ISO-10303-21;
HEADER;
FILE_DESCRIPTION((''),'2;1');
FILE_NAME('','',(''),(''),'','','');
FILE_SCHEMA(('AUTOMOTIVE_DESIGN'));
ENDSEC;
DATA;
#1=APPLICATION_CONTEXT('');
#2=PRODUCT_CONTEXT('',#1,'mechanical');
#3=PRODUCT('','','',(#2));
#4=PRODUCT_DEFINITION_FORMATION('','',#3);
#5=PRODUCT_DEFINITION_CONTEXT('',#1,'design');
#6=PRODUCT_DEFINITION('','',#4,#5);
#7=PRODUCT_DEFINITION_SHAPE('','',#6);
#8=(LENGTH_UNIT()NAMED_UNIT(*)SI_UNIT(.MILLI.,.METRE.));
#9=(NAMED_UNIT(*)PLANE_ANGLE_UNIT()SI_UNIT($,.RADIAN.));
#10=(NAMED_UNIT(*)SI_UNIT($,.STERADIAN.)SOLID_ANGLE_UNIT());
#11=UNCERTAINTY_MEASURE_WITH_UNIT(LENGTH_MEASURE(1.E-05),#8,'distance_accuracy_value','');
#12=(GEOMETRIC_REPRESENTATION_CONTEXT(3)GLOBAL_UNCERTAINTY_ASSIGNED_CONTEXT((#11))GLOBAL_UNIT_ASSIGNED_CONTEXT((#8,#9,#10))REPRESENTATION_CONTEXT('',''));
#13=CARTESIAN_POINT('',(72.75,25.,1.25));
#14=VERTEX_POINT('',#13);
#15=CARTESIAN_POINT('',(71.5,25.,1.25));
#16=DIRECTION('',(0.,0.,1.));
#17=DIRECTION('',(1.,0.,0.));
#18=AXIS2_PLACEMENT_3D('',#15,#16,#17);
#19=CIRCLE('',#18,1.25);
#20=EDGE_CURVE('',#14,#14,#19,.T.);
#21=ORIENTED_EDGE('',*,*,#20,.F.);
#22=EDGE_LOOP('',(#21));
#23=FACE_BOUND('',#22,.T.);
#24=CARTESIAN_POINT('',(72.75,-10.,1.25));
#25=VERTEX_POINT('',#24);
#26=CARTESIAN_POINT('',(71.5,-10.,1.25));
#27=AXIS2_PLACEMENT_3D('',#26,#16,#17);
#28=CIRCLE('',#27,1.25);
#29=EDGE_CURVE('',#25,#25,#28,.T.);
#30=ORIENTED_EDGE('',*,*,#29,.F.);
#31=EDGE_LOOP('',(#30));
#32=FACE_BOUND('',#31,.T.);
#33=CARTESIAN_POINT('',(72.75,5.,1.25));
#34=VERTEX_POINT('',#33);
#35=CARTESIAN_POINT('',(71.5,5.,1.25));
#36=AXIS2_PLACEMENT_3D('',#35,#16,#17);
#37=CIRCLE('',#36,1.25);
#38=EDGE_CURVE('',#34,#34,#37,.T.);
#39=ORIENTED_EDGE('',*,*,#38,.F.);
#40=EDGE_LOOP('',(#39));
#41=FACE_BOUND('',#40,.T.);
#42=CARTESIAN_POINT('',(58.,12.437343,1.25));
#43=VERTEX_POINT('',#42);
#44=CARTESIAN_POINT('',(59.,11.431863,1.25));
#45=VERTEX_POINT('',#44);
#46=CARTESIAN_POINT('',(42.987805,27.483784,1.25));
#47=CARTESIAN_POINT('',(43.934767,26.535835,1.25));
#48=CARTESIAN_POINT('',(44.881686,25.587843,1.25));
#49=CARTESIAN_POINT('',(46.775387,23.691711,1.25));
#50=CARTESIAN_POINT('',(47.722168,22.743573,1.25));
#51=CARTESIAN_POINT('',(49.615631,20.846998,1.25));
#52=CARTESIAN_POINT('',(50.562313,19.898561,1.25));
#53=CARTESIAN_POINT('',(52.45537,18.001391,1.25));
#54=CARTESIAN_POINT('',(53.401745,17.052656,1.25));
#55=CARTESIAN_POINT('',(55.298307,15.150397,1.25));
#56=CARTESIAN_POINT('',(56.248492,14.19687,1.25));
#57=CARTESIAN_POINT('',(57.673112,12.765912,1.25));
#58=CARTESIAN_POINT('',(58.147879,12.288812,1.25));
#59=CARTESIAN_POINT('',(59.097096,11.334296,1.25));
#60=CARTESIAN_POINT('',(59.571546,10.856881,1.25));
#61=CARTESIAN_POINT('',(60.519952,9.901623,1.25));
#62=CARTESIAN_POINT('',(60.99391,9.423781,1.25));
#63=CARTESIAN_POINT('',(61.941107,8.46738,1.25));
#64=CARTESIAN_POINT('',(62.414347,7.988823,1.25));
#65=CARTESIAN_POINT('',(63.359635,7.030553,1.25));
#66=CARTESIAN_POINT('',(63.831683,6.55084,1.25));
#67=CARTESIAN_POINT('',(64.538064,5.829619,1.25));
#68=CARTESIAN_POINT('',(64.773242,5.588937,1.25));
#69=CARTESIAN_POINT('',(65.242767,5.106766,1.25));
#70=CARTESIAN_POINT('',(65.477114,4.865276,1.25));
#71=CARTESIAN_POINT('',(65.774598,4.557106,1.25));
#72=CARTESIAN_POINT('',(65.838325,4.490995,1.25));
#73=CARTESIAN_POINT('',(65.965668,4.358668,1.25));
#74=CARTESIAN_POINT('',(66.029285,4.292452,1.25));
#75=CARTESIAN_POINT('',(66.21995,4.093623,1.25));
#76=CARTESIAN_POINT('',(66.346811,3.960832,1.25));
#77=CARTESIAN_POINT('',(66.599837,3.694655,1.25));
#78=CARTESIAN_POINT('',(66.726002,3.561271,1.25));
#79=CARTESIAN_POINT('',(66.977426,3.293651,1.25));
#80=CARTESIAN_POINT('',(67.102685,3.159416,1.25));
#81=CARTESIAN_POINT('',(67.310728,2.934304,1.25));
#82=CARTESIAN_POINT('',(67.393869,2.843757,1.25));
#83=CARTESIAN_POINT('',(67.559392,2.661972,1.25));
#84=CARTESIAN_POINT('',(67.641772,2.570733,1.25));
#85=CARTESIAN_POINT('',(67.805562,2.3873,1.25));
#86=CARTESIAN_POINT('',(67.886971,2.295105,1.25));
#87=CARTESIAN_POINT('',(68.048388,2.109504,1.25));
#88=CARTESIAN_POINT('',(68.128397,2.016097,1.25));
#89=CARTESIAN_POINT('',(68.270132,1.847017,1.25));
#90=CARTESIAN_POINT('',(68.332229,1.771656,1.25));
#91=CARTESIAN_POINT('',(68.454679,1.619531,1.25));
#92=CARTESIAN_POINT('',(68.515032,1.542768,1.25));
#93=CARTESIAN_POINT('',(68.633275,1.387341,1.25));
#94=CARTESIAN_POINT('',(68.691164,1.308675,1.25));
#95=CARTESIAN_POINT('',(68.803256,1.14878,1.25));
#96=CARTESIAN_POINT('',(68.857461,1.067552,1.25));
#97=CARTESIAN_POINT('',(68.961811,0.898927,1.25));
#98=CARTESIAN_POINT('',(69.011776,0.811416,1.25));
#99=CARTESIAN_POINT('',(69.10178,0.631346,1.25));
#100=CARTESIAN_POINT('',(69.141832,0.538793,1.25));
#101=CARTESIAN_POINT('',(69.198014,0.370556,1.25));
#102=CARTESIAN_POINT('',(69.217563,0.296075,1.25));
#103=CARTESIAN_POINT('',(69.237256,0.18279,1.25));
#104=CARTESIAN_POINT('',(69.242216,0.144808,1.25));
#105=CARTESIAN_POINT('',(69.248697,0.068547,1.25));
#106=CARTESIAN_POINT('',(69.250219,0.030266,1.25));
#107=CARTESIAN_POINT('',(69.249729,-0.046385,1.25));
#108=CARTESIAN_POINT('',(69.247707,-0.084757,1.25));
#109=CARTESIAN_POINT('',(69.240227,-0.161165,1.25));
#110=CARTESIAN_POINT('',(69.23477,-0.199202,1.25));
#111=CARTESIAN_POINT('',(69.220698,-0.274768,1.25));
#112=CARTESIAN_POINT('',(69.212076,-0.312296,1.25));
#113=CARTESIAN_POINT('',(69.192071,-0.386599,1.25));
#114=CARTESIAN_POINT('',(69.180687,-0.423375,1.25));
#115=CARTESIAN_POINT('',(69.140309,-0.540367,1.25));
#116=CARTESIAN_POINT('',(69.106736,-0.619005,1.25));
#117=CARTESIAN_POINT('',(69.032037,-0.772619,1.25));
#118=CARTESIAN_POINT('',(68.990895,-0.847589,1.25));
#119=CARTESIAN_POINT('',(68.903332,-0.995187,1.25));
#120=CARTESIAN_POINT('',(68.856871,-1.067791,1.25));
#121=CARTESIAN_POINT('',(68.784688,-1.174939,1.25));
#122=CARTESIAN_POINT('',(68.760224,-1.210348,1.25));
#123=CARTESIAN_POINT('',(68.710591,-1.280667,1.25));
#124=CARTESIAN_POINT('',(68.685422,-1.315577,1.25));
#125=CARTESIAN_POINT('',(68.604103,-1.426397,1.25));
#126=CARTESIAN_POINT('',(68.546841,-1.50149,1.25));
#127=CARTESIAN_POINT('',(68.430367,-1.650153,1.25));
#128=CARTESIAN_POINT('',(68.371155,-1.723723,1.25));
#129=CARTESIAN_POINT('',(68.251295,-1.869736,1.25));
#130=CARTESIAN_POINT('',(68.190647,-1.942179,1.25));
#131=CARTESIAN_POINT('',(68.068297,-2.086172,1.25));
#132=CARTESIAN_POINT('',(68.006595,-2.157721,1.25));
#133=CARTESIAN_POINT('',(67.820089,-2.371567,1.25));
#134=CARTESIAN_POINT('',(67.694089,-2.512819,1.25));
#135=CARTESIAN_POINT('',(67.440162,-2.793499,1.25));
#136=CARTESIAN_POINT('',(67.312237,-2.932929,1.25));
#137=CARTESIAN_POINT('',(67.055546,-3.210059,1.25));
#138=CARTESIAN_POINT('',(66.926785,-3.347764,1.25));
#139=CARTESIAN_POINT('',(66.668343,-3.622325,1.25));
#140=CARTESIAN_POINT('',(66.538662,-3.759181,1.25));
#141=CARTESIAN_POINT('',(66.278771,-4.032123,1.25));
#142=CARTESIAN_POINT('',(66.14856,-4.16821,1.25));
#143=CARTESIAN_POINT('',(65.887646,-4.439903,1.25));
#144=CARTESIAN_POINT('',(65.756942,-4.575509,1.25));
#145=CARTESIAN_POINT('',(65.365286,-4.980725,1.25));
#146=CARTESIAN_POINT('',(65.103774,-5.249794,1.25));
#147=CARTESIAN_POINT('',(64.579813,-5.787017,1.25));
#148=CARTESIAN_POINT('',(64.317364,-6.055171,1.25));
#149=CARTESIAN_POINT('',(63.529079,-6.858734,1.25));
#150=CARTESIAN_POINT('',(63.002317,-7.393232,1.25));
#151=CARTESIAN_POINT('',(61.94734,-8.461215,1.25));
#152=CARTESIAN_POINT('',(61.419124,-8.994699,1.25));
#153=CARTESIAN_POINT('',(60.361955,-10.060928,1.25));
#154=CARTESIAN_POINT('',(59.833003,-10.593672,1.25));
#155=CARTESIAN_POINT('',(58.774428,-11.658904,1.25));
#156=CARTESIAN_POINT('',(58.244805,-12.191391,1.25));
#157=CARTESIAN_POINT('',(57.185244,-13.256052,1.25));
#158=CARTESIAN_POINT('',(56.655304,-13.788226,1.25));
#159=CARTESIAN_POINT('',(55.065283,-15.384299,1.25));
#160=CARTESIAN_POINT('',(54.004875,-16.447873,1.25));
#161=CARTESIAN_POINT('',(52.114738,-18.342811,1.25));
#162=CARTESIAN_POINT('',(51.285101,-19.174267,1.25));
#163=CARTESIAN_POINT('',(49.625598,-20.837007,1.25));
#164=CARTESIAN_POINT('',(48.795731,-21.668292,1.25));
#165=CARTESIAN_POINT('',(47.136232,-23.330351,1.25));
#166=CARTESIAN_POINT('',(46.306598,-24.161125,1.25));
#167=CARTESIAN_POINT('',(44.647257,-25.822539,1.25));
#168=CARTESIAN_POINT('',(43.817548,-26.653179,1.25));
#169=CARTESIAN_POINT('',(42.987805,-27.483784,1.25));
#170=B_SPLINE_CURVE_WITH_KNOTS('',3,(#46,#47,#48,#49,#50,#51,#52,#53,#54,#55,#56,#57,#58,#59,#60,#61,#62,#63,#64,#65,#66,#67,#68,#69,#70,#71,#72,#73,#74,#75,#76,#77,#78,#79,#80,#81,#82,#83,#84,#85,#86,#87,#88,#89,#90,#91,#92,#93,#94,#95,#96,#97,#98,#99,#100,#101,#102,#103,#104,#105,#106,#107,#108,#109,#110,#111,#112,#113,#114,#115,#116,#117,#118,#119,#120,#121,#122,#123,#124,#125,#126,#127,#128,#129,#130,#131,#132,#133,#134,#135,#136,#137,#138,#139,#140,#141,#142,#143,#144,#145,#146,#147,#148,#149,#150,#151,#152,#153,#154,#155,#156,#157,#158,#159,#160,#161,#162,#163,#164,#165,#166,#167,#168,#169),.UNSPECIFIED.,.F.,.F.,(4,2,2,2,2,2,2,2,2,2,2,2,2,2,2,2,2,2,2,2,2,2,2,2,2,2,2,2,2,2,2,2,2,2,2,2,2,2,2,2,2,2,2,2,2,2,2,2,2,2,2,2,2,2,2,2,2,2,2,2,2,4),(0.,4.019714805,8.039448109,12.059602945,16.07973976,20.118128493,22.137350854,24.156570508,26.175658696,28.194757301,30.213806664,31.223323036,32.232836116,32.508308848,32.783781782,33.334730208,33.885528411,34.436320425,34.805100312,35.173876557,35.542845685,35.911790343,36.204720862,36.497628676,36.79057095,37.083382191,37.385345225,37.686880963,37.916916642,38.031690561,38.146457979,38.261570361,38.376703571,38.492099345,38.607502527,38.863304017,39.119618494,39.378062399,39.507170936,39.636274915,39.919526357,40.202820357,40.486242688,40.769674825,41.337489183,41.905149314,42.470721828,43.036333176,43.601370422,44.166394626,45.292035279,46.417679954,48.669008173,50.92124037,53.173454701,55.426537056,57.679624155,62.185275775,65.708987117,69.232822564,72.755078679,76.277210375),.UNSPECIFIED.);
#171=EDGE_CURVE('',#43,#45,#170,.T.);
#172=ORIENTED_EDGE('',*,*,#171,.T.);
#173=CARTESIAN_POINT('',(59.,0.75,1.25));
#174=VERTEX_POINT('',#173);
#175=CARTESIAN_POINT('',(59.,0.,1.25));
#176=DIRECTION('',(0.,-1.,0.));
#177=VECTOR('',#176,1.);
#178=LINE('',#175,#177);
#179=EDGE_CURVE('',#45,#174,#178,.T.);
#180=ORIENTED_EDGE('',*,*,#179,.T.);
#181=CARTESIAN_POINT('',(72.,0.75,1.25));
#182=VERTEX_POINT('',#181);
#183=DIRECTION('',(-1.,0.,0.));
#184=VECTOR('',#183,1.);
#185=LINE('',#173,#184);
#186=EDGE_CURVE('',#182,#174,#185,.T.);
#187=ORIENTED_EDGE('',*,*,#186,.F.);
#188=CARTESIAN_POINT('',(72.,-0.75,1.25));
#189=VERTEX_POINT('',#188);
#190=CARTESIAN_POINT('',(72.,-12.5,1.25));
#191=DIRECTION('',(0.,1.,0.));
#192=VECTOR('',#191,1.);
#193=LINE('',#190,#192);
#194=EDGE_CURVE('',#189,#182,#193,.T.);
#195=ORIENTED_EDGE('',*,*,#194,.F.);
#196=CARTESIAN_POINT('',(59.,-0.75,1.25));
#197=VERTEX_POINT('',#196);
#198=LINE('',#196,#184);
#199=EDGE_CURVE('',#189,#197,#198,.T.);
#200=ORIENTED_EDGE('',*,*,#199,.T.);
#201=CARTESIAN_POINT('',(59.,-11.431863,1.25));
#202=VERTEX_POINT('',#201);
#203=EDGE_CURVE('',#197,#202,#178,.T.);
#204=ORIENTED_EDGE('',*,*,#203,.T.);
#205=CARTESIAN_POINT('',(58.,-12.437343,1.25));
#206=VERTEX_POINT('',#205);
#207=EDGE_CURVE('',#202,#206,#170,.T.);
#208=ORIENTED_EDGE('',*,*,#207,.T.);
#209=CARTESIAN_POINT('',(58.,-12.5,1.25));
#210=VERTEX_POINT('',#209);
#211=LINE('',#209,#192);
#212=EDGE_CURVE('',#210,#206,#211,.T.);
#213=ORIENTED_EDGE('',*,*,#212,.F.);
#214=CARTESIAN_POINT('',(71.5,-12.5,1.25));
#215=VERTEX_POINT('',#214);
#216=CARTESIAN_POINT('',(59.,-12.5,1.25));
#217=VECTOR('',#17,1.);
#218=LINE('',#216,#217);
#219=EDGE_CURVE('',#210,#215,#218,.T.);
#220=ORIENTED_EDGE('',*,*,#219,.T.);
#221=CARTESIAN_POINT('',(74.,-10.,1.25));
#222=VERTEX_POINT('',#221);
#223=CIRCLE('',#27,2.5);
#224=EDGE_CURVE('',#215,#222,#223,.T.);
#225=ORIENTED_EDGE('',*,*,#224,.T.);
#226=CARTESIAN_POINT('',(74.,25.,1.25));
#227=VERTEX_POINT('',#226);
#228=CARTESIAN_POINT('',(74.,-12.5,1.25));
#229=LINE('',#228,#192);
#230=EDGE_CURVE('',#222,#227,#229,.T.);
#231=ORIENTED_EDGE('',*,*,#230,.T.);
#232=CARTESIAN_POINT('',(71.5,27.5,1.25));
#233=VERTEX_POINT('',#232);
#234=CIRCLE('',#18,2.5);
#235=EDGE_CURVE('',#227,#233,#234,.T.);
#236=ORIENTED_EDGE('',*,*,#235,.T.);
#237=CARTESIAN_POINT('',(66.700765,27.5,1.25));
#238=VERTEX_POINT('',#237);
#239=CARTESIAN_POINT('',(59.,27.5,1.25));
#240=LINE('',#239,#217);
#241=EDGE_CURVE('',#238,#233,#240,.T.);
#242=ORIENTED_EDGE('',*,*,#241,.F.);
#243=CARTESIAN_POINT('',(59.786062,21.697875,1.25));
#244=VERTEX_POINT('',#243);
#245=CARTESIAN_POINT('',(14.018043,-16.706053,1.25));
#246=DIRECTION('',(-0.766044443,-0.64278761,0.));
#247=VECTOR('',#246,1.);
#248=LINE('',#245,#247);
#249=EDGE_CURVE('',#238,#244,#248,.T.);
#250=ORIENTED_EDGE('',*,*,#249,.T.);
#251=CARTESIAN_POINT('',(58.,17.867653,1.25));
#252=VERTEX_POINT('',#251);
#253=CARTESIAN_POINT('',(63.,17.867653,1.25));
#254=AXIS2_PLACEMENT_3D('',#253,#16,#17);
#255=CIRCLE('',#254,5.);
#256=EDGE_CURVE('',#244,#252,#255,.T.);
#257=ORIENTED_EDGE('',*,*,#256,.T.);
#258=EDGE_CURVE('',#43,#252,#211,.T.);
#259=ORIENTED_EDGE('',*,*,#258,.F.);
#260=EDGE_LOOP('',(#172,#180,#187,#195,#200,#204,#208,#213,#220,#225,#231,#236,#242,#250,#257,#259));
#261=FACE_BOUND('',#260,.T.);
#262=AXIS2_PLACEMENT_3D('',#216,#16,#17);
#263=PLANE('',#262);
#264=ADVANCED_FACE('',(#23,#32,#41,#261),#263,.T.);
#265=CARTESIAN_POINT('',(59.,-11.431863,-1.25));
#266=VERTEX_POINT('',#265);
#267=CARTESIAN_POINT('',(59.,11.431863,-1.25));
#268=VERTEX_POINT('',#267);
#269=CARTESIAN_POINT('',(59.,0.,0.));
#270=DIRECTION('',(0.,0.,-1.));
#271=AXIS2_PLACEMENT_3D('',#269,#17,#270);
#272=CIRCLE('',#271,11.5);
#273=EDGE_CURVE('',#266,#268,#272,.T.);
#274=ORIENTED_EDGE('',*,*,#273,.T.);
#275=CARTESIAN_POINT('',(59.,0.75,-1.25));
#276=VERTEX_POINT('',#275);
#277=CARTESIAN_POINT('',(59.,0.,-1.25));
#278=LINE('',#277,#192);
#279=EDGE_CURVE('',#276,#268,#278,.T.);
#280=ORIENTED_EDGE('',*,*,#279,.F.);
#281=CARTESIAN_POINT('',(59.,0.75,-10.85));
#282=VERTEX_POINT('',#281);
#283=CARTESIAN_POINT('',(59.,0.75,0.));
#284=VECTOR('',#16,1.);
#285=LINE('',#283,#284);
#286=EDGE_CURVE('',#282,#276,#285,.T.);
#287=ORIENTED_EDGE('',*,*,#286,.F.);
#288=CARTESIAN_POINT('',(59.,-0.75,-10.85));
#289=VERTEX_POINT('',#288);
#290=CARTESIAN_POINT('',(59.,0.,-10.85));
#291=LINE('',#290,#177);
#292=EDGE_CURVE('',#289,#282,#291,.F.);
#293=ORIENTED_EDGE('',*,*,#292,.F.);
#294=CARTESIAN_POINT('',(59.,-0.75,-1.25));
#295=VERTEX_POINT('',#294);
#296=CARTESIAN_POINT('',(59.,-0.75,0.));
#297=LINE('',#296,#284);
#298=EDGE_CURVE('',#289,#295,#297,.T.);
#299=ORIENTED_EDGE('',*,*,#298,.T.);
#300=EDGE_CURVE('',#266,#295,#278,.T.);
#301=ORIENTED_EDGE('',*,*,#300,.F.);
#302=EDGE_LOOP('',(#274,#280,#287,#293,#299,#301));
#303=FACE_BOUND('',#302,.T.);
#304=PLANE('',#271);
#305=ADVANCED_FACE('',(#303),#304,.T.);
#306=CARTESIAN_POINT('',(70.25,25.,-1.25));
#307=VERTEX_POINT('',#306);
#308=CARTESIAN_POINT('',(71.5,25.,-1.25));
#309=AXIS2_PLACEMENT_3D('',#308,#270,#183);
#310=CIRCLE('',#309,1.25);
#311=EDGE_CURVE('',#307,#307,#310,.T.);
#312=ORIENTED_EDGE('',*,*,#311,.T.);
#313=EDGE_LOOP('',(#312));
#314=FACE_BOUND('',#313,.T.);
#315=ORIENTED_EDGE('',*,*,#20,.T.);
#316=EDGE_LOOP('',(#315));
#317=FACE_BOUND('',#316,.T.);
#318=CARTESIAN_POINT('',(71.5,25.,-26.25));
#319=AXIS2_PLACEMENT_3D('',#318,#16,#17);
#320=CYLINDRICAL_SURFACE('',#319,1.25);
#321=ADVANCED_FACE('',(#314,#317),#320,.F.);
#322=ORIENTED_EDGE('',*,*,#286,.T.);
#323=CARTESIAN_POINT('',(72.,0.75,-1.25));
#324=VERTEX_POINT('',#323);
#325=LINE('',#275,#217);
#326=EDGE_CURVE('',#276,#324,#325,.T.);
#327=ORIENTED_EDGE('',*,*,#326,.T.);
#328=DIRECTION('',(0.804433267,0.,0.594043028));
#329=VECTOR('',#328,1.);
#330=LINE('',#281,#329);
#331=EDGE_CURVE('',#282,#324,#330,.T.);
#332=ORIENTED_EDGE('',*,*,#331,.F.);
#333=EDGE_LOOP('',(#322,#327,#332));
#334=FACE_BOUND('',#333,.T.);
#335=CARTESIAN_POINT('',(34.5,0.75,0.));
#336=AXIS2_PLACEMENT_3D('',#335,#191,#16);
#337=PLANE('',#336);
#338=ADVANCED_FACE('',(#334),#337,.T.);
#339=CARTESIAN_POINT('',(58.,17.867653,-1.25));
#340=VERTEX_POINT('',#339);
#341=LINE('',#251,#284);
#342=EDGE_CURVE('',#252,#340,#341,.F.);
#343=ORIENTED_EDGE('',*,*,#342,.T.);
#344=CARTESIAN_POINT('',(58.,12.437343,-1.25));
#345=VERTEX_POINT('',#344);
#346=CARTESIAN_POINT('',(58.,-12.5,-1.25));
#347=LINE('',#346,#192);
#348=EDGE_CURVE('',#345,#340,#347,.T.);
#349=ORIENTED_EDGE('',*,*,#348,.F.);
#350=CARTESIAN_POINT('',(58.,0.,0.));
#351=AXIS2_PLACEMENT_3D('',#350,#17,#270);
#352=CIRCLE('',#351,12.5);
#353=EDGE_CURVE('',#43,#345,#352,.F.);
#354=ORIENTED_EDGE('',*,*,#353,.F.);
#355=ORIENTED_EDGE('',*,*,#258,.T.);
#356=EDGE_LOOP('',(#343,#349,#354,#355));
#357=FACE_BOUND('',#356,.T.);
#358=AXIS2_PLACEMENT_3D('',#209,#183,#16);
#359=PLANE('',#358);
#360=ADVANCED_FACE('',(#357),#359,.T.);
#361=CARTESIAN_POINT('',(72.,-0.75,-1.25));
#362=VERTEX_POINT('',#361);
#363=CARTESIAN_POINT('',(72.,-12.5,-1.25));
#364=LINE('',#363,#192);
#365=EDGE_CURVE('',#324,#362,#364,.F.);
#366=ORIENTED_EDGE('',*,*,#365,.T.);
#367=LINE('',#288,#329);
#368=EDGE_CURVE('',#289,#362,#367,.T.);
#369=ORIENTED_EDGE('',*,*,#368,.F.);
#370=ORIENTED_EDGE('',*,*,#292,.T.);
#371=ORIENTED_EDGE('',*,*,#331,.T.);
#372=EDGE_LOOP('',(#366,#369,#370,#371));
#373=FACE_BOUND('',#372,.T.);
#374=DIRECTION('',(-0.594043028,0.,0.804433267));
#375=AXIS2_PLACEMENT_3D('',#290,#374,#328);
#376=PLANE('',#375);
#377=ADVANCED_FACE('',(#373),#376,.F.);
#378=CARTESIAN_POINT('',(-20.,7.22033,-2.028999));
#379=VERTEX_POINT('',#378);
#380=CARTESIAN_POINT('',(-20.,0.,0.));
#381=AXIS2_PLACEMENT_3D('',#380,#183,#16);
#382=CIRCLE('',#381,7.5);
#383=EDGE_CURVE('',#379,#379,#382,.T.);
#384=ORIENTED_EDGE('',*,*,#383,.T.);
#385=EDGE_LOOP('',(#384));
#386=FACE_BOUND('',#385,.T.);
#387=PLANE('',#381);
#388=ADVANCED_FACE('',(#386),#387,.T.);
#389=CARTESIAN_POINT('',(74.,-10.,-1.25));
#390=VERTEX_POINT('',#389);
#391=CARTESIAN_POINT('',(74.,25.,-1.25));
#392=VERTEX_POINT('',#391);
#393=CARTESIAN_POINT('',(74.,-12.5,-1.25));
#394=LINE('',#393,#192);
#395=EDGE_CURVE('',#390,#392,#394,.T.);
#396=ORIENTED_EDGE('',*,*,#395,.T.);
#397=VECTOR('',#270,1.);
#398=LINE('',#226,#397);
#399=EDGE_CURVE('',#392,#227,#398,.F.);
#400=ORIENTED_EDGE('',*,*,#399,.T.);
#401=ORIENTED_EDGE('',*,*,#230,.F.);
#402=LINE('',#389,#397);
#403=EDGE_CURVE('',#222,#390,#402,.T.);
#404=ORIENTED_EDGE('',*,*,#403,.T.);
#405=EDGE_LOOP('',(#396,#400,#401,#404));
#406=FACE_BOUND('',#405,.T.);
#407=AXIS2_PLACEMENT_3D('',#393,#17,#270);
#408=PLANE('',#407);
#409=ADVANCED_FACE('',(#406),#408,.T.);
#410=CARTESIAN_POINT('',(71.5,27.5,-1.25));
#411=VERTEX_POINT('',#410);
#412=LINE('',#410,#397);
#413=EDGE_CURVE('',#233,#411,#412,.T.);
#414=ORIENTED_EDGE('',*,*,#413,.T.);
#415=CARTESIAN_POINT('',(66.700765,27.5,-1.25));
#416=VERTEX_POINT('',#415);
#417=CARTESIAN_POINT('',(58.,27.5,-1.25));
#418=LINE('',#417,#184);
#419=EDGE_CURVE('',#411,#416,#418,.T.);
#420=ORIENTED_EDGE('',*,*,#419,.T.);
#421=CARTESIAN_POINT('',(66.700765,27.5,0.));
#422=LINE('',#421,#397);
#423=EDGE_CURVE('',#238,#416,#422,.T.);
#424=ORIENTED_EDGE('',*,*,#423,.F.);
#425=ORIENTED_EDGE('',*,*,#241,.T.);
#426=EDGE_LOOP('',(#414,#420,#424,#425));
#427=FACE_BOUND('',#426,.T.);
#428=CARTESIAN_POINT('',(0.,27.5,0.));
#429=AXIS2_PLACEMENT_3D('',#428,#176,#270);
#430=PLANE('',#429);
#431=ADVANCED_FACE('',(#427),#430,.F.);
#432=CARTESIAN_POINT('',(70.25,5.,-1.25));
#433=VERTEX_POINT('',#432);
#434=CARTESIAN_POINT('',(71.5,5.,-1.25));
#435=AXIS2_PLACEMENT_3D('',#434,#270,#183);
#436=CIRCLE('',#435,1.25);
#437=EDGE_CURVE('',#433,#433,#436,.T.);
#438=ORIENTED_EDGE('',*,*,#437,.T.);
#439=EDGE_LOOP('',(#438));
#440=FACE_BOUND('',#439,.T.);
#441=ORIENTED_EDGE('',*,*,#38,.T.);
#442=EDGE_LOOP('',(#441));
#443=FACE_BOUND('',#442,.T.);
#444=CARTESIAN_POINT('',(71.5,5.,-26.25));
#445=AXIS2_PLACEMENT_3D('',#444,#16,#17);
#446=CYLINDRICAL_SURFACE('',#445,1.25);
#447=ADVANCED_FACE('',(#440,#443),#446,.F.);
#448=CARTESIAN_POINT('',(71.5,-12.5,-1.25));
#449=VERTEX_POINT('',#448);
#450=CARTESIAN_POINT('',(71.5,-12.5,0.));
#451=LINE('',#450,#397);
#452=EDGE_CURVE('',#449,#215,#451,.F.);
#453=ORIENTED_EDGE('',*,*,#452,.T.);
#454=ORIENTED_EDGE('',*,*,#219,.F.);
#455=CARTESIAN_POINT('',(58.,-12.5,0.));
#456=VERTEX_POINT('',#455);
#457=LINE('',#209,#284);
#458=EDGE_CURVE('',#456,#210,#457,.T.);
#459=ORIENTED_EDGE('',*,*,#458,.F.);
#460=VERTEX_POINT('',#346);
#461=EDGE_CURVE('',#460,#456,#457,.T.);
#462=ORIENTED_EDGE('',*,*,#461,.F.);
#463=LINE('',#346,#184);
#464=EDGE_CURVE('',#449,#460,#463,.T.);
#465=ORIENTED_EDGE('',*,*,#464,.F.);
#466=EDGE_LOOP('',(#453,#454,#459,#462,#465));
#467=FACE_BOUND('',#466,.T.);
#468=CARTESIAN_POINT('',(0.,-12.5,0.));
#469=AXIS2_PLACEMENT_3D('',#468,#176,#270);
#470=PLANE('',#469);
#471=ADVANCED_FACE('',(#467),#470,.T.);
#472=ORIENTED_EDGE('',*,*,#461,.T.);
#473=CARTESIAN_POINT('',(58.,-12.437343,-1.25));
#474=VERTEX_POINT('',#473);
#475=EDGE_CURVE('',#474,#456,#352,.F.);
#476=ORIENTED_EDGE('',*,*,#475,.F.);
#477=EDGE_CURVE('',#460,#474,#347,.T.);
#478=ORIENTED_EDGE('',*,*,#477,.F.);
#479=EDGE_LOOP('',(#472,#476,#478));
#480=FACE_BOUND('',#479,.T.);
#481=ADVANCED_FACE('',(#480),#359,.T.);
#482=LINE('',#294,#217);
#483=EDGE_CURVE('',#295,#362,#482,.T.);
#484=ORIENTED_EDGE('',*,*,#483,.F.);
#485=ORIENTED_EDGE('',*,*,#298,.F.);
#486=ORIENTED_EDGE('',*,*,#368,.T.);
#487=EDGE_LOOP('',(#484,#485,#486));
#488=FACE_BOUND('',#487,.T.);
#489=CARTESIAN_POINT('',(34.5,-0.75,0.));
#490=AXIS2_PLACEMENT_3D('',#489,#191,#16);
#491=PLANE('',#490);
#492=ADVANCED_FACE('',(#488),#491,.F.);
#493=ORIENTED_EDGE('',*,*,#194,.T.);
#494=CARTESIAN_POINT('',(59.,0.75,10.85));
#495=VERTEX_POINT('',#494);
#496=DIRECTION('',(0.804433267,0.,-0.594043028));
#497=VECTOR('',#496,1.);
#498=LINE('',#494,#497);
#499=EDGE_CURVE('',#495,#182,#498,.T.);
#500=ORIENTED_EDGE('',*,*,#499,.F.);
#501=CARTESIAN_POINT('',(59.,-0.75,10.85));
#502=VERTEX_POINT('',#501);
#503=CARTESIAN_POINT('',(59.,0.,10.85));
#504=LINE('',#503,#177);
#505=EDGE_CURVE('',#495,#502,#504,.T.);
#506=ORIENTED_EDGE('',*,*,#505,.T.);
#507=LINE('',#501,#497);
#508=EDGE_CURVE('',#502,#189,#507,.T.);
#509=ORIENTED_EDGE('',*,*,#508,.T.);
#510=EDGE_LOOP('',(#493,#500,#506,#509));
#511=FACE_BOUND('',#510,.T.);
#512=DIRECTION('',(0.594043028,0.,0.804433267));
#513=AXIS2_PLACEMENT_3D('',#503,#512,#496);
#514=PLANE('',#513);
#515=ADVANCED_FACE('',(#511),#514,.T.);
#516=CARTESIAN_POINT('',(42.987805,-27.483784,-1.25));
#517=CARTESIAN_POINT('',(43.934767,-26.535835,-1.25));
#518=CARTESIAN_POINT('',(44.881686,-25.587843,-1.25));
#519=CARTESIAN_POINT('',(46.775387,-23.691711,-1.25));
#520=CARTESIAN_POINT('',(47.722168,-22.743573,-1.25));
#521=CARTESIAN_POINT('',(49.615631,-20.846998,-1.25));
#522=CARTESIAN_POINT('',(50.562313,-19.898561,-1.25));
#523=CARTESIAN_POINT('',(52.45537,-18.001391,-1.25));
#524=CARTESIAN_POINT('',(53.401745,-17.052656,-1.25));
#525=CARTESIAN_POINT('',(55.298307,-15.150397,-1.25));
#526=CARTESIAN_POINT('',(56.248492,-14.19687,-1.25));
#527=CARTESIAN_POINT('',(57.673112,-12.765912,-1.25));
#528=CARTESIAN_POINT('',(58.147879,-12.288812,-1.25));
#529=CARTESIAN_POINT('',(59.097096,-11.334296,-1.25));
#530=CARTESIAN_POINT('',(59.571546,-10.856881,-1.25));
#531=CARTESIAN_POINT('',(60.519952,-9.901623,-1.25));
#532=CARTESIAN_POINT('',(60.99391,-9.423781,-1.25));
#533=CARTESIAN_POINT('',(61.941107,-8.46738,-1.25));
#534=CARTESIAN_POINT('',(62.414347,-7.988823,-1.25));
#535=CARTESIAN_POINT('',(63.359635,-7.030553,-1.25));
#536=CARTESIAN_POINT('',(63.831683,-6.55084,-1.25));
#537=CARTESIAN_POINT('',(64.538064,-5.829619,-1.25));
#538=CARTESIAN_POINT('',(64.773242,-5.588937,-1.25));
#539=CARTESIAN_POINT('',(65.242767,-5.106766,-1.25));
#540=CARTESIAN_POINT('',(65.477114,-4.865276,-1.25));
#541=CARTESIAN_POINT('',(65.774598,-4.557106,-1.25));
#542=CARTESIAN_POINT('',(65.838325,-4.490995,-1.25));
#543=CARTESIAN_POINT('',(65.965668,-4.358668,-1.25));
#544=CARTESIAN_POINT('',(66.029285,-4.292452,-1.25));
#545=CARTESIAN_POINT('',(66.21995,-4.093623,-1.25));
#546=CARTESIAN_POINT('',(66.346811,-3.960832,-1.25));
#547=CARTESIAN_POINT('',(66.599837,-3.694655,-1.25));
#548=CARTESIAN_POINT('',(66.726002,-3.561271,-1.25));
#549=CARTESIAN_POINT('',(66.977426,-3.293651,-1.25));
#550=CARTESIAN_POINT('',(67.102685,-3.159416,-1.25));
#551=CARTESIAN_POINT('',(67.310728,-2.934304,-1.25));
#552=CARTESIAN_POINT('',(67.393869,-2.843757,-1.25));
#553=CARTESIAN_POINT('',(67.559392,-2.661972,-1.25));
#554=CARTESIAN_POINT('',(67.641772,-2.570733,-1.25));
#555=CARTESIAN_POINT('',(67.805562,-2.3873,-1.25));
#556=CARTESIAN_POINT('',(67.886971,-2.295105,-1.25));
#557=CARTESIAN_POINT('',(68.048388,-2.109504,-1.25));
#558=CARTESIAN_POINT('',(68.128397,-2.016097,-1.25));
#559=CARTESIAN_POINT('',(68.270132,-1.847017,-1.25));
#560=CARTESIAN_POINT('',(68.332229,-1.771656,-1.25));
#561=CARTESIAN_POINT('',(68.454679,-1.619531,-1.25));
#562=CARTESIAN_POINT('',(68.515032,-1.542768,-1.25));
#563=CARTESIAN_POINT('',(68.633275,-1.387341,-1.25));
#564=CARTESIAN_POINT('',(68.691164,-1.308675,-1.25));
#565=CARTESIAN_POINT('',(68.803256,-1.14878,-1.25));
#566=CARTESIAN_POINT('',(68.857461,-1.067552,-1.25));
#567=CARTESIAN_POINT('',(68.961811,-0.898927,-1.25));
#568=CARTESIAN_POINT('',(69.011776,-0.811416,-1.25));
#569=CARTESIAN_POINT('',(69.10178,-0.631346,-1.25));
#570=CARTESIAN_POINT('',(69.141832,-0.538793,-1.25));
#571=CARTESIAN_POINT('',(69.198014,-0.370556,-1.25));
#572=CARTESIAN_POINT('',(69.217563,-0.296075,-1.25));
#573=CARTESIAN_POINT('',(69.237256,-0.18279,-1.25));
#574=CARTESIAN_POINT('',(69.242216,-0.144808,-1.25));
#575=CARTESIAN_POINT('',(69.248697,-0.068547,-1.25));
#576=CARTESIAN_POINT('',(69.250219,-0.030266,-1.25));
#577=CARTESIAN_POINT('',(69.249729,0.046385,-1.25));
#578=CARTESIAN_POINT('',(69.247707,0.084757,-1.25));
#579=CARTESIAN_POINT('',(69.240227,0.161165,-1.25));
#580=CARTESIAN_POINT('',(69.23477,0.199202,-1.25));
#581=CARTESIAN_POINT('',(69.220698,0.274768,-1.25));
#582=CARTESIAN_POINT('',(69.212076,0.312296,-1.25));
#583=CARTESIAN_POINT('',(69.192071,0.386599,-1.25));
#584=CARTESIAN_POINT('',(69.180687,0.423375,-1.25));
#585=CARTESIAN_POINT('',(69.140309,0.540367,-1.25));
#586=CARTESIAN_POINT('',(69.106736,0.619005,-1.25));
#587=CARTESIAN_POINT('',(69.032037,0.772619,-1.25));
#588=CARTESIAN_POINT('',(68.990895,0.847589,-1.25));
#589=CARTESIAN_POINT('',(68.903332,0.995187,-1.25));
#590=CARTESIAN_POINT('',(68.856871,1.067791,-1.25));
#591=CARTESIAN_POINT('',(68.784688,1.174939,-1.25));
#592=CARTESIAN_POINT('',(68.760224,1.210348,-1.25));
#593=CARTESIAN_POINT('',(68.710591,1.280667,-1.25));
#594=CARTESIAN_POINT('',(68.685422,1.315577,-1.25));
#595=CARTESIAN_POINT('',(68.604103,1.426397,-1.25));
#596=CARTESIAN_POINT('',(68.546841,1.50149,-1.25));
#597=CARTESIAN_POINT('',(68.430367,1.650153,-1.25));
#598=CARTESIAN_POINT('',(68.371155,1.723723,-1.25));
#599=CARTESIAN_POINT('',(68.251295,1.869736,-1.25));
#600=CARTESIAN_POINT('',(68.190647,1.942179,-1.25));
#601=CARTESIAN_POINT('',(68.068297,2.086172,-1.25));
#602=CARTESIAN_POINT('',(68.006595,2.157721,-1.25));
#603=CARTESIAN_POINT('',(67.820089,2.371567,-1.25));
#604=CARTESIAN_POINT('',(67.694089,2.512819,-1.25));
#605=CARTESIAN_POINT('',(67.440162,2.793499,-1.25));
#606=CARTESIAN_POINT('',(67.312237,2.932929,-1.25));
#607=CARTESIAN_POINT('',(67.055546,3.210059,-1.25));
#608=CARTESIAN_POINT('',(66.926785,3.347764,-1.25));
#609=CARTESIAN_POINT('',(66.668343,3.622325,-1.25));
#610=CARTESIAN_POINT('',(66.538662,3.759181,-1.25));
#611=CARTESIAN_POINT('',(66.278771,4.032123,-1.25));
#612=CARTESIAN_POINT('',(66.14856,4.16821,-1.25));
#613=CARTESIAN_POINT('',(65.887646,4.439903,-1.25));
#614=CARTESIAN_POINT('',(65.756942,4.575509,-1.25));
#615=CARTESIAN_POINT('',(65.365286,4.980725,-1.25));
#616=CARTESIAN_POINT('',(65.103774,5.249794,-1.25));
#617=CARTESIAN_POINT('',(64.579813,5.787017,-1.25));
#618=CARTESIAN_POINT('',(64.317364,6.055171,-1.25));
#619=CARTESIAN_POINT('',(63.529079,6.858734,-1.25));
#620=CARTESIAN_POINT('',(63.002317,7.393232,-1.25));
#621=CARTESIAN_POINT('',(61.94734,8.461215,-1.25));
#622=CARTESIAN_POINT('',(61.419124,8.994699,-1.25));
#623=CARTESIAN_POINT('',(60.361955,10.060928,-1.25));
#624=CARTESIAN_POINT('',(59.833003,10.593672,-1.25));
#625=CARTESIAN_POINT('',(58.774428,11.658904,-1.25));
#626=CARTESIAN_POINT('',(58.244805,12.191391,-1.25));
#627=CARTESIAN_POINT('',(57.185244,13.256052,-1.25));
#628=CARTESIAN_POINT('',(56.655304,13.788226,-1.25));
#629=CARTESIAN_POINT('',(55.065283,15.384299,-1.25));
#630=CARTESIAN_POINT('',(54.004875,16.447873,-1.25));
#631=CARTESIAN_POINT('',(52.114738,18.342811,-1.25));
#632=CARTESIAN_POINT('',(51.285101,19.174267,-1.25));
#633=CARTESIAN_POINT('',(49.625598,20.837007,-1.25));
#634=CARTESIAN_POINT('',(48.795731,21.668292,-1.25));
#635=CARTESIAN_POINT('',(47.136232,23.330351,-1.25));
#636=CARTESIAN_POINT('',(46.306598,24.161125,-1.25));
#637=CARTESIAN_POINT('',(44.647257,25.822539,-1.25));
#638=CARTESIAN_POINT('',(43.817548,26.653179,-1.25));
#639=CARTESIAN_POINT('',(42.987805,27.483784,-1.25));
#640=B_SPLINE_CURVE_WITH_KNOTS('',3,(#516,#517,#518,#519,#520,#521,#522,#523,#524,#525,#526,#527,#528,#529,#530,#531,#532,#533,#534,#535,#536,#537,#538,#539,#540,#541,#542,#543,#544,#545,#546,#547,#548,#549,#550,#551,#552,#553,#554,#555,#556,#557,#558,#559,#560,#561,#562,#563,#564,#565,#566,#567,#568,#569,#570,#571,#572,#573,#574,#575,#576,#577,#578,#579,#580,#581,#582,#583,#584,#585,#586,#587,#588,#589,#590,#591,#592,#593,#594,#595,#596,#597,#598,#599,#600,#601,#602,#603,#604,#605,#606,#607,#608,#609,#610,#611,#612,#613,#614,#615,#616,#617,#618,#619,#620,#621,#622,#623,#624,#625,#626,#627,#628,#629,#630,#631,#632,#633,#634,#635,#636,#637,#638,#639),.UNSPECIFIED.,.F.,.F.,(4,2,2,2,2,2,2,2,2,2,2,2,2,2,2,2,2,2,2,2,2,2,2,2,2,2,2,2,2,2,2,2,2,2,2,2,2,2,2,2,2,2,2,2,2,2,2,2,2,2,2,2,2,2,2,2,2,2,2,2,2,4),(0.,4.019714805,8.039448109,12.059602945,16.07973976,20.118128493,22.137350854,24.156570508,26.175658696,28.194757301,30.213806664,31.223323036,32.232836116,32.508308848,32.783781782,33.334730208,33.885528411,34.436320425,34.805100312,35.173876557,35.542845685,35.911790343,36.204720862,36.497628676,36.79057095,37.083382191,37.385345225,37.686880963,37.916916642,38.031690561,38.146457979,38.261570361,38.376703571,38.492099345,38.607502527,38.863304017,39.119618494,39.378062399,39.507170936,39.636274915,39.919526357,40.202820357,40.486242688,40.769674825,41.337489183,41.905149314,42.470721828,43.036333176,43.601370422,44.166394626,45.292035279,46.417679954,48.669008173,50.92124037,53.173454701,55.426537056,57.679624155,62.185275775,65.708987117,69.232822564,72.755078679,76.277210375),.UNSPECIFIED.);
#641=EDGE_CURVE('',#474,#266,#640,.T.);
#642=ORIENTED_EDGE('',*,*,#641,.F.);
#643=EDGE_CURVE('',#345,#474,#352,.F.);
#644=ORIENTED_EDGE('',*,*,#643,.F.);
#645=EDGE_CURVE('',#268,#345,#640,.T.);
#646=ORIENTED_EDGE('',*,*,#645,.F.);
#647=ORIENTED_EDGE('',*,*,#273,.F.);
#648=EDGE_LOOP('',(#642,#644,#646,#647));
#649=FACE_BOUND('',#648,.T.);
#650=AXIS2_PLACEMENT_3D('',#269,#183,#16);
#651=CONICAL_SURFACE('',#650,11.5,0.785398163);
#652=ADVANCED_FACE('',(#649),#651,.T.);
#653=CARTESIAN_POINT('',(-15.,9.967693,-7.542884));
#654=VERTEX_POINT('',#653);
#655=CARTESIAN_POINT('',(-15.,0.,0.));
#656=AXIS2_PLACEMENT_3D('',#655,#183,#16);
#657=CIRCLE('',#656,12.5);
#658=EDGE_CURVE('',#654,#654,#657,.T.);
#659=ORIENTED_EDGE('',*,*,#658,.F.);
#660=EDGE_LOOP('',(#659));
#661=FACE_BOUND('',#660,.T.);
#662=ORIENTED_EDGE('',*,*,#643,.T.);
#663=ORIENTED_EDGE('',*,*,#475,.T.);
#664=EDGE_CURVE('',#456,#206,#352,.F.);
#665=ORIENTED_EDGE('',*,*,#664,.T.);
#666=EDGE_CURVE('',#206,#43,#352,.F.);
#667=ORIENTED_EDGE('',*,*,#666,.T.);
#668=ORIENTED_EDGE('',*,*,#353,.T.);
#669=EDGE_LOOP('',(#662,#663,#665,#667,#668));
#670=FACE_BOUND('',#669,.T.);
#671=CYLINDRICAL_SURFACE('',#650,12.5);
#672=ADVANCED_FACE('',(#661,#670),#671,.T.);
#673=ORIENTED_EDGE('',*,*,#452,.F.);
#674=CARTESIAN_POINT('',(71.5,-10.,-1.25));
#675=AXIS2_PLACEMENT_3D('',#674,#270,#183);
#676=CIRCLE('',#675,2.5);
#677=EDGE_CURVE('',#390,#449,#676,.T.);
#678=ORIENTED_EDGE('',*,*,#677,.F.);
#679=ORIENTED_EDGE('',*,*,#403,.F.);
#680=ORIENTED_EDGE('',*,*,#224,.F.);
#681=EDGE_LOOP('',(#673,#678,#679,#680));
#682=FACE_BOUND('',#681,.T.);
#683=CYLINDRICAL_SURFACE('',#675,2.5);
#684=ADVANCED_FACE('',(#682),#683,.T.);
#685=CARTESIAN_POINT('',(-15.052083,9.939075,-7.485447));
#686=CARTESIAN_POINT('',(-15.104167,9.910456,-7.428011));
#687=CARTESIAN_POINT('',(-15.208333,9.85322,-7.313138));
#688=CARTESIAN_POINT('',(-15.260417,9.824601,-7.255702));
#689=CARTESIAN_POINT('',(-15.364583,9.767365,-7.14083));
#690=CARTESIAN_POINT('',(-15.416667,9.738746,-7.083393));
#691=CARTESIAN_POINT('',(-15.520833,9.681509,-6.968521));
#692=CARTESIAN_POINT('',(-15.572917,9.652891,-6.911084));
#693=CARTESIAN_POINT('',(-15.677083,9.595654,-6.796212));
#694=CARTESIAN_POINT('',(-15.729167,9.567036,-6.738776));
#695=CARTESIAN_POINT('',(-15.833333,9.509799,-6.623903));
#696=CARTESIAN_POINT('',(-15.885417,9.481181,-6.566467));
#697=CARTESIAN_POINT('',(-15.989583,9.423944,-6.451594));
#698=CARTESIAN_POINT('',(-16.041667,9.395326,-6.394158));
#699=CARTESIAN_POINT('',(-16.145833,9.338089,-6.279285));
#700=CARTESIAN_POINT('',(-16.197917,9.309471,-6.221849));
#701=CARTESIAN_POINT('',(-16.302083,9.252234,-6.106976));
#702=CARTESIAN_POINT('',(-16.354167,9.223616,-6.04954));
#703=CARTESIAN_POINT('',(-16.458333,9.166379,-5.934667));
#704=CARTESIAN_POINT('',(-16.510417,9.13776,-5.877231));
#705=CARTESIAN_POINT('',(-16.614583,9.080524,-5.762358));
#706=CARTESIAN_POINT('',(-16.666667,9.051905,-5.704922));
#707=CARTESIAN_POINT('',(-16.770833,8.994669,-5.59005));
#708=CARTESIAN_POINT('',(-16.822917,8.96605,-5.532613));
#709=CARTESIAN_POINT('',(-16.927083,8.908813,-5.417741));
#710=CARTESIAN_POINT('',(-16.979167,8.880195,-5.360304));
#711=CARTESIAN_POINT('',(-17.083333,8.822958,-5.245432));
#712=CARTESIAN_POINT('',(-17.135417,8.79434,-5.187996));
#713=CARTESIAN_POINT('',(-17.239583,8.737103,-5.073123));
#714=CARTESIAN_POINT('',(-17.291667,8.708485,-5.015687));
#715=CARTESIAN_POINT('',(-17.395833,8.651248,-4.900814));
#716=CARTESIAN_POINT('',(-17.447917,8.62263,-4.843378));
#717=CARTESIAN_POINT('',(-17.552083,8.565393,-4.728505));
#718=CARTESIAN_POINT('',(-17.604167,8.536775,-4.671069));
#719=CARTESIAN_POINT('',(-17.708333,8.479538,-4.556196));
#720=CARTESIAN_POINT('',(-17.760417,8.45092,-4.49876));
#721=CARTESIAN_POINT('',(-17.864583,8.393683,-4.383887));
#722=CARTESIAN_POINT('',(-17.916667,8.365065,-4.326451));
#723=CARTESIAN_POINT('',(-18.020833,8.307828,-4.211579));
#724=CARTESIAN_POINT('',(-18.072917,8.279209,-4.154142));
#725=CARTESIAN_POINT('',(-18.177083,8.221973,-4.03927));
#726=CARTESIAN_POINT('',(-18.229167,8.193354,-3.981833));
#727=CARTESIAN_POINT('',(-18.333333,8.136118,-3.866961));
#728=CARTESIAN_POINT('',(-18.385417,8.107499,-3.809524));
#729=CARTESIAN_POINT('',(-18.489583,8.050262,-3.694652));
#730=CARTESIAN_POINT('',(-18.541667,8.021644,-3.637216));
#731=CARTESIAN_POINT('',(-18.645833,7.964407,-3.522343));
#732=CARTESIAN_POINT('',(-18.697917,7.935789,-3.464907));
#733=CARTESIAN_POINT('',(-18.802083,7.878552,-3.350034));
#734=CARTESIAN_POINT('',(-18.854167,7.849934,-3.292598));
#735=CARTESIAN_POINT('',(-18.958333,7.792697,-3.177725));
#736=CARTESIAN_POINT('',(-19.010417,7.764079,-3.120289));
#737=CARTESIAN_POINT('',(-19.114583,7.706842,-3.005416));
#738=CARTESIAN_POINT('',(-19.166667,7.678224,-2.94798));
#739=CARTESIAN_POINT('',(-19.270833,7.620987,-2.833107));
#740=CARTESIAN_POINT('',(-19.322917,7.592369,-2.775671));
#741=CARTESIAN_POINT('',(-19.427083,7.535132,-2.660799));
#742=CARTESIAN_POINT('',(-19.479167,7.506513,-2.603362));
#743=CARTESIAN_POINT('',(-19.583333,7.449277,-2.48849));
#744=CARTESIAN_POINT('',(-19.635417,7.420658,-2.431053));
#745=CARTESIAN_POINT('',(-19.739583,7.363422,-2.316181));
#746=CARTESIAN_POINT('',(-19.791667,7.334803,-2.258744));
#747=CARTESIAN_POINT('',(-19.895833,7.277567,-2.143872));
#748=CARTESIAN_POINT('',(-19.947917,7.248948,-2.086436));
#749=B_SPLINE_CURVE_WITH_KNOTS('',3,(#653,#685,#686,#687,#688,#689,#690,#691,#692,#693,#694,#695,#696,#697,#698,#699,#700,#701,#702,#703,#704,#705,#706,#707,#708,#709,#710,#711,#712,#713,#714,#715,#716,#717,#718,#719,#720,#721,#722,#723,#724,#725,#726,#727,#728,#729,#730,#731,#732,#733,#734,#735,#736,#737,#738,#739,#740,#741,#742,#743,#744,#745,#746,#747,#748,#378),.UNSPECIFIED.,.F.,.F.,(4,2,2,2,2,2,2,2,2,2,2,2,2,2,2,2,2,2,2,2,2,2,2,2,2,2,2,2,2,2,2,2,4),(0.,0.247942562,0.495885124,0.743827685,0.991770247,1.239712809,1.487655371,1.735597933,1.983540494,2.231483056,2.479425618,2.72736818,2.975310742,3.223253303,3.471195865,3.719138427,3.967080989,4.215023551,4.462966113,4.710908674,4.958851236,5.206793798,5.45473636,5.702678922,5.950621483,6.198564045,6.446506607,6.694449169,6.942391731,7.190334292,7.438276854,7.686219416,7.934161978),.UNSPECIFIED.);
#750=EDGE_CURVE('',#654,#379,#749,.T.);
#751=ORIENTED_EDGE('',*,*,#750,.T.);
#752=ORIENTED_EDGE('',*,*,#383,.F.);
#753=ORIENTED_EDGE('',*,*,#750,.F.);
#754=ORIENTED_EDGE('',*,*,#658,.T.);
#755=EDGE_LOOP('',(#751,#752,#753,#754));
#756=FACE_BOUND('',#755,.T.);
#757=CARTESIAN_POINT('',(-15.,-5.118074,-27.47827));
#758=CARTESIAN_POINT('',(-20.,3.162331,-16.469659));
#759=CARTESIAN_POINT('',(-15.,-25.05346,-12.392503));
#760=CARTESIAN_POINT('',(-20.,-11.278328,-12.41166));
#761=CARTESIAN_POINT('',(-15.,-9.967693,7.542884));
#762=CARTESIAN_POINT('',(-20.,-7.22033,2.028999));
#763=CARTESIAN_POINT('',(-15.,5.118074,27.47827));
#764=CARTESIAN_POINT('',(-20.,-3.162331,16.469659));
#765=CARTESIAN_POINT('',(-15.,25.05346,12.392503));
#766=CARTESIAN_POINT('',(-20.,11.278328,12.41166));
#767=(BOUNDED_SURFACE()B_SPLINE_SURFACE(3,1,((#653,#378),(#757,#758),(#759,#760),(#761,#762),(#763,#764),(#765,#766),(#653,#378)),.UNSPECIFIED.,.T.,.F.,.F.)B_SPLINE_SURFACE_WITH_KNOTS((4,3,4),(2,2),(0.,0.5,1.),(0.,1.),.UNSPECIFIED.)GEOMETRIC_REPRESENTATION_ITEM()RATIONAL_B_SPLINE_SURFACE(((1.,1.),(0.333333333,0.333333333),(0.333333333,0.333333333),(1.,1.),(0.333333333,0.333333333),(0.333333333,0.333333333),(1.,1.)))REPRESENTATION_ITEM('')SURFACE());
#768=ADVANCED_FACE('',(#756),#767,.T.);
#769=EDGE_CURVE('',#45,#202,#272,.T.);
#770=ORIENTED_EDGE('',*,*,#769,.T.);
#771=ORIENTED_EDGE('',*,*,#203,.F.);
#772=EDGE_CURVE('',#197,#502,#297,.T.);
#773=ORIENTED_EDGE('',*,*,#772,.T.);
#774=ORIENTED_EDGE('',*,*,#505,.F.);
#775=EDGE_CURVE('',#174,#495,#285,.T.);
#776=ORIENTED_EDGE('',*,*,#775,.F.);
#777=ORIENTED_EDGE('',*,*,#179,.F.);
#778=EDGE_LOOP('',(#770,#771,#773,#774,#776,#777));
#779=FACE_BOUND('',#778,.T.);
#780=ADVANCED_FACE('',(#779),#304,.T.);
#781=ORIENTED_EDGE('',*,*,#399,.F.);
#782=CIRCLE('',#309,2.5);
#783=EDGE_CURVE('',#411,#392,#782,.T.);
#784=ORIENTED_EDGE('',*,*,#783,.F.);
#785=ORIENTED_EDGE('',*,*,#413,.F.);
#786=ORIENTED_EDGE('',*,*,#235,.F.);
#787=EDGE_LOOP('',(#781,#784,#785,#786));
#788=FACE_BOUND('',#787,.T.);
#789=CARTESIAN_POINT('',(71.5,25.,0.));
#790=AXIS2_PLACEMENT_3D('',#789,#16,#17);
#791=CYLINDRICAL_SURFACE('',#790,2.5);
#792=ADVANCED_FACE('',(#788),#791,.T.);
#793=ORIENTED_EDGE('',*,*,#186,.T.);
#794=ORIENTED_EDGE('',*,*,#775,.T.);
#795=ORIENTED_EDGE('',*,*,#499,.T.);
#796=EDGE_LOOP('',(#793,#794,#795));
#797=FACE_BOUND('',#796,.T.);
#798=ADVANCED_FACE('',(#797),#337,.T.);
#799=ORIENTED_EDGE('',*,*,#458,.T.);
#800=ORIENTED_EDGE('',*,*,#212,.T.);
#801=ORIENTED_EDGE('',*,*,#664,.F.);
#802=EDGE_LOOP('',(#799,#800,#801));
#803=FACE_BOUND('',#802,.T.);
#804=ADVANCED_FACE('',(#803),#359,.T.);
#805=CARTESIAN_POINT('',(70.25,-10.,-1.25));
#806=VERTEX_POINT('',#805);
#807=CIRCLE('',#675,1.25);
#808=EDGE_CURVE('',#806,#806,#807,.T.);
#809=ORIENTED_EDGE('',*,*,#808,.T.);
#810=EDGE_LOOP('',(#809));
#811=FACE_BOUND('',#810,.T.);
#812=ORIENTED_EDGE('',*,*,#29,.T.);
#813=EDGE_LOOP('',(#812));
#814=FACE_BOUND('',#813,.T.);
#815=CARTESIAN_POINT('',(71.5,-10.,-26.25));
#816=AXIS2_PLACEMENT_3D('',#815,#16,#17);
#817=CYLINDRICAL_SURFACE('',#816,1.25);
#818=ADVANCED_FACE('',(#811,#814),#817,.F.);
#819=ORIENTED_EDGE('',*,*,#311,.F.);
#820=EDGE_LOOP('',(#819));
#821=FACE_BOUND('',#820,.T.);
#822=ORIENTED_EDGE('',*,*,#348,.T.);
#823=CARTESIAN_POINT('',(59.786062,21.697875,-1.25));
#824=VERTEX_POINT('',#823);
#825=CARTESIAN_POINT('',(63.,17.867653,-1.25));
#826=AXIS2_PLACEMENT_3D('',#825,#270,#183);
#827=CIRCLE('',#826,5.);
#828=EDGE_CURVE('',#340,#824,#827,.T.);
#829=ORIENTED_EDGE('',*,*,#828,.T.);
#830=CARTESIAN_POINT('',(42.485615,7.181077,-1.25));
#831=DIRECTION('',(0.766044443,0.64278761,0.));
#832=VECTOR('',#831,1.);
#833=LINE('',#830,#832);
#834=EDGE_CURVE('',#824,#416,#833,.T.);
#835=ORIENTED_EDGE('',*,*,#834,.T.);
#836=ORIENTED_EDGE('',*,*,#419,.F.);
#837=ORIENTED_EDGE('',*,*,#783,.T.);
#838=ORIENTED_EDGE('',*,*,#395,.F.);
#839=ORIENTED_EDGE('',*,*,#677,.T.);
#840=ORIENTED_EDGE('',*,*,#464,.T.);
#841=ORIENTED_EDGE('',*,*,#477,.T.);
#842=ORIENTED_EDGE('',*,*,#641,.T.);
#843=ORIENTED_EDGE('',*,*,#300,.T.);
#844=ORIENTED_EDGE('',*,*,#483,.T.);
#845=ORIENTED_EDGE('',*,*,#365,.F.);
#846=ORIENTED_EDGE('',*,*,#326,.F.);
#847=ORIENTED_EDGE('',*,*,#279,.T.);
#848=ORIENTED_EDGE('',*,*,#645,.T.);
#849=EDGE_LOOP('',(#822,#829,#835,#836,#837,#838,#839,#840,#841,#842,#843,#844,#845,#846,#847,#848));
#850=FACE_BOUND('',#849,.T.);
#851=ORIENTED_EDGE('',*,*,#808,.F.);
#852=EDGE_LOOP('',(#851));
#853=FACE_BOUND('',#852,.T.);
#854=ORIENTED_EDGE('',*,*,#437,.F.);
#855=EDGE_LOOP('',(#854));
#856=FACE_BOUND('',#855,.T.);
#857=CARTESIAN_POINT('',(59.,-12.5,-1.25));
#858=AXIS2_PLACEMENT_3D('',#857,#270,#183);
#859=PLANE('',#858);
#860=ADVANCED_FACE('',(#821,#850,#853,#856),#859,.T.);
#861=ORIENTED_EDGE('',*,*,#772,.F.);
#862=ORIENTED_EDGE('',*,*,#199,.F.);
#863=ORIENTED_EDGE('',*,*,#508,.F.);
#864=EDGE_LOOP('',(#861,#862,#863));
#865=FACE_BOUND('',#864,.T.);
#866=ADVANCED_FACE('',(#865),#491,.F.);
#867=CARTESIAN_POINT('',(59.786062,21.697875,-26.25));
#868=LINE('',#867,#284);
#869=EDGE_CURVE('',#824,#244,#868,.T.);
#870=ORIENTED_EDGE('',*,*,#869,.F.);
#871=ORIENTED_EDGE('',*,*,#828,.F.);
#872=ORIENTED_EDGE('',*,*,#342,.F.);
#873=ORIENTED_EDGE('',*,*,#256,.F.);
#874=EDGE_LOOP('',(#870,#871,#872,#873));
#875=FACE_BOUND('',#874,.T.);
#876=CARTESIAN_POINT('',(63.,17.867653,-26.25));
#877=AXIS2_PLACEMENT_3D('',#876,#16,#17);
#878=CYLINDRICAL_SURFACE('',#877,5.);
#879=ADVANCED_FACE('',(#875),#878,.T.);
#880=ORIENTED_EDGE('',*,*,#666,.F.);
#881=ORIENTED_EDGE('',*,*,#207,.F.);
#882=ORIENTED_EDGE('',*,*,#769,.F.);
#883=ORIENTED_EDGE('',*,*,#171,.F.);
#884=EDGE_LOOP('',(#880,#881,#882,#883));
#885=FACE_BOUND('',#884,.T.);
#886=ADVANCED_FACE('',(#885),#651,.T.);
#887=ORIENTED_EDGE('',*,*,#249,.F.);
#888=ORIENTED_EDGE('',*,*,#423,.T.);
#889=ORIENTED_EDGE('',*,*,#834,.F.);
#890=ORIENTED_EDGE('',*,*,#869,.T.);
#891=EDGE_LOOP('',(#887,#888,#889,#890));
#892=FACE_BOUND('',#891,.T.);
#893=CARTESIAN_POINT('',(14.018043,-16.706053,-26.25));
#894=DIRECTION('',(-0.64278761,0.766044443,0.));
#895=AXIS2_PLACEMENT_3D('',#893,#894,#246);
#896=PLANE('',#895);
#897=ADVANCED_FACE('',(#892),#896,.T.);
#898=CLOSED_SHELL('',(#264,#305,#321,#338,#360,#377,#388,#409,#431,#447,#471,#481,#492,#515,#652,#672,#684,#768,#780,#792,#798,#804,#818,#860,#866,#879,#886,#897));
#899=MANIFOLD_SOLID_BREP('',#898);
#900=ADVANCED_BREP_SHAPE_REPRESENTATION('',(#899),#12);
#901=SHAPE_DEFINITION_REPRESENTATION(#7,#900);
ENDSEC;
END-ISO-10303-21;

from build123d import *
from build123d.topology import SkipClean

# Parameters (mm, degrees)
SKETCH1_R                = 12.5
BOSS_EXTRUDE1_DEPTH      = 59
SKETCH2_R                = 7.5
BOSS_EXTRUDE2_DEPTH      = 5
CHAMFER1_SIZE            = 1
BOSS_EXTRUDE3_DEPTH      = 27.5
BOSS_EXTRUDE3_DEPTH_BACK = 12.5
FILLET1_R                = 2.5
SKETCH4_R                = 1.25
CUT_EXTRUDE1_DEPTH       = 27.5
CUT_EXTRUDE2_DEPTH       = 27.5
FILLET2_R                = 5
SKETCH6_R                = 1.25
CUT_EXTRUDE3_DEPTH       = 27.5
RIB1_REACH               = 81.928
SKETCH7_WALL_W           = 178.016630936
SKETCH7_WALL_H           = 1.5
SKETCH9_R                = 12.5
BOSS_EXTRUDE5_DEPTH      = 10
SKETCH10_R               = 12.5
BOSS_EXTRUDE6_DEPTH      = 10
SKETCH11_R               = 7.5
BOSS_EXTRUDE7_DEPTH      = 5


with BuildPart() as part:
    # Sketch1 → Boss-Extrude1 (new body)
    with BuildSketch(Plane(origin=(0, 0, 0), x_dir=(0, 0, -1), z_dir=(1, 0, 0))):
        with Locations(Location((0, 0, 0), (0, 0, 180))):
            Circle(SKETCH1_R)
    extrude(amount=BOSS_EXTRUDE1_DEPTH)

    # Sketch2 → Boss-Extrude2 (add)
    with BuildSketch(Plane.ZY):
        Circle(SKETCH2_R)
    extrude(amount=BOSS_EXTRUDE2_DEPTH)

    # loft up to a face of the part (loft1)
    loft([Face(Wire([part.edges().sort_by_distance((0, 9.112107843, -8.556838824))[0]])), Face(Wire([part.edges().sort_by_distance((-5, 5.467264706, -5.134103294))[0]]))])

    # Chamfer1
    chamfer1_edges = [part.edges().sort_by_distance(p)[0] for p in [
        (59, 0, -12.5),
    ]]
    chamfer(chamfer1_edges, length=CHAMFER1_SIZE)

    # Sketch3 → Boss-Extrude3 (add, two sides: drawn at the far end of the back side and taken through both)
    with BuildSketch(Plane(origin=(0, 0, 0), x_dir=(1, 0, 0), z_dir=(0, 1, 0)).offset(-BOSS_EXTRUDE3_DEPTH_BACK)):
        Polygon((59, 1.25), (74, 1.25), (74, -1.25), (59, -1.25), (58, -1.25), (58, 1.25), align=None)
    extrude(amount=BOSS_EXTRUDE3_DEPTH + BOSS_EXTRUDE3_DEPTH_BACK)

    # Fillet1
    fillet1_edges = [part.edges().sort_by_distance(p)[0] for p in [
        (74, -12.5, 0),
        (74, 27.5, 0),
    ]]
    fillet(fillet1_edges, radius=FILLET1_R)

    # Sketch4 → Cut-Extrude1 (cut)
    with BuildSketch(Plane.XY.offset(1.25)):
        with Locations((71.5, -10)):
            Circle(SKETCH4_R)
        with Locations((71.5, 25)):
            Circle(SKETCH4_R)
    extrude(amount=-CUT_EXTRUDE1_DEPTH, mode=Mode.SUBTRACT)

    # Sketch5 → Cut-Extrude2 (cut)
    with BuildSketch(Plane.XY.offset(1.25)):
        Polygon((58, 20.199191426), (66.700764847, 27.5), (58, 27.5), align=None)
    extrude(amount=-CUT_EXTRUDE2_DEPTH, mode=Mode.SUBTRACT)

    # Fillet2
    fillet2_edges = [part.edges().sort_by_distance(p)[0] for p in [
        (58, 20.199191426, 0),
    ]]
    fillet(fillet2_edges, radius=FILLET2_R)

    # Sketch6 → Cut-Extrude3 (cut)
    with BuildSketch(Plane.XY.offset(1.25)):
        with Locations((71.5, 5)):
            Circle(SKETCH6_R)
        with Locations((71.5, -10)):
            Circle(SKETCH6_R)
    extrude(amount=-CUT_EXTRUDE3_DEPTH, mode=Mode.SUBTRACT)

    # Sketch7 wall → Rib1 (add, up to next)
    with BuildSketch(Plane(origin=(65.5, 0, 6.05), x_dir=(0.80443326696, 0, -0.594043027909), z_dir=(-0.594043027909, 0, -0.80443326696)), mode=Mode.PRIVATE) as rib1_sk1:
        Rectangle(SKETCH7_WALL_W, SKETCH7_WALL_H)
    rib1_tool1 = extrude(rib1_sk1.sketch, amount=RIB1_REACH, mode=Mode.PRIVATE) - part.part
    rib1 = rib1_tool1.solids().sort_by_distance((65.5, 0, 6.05))[0]
    add(rib1)

    # Mirror1: Rib1 across plane
    add(rib1.mirror(Plane.XY))



with BuildPart() as body_2:
    # Sketch9 → Boss-Extrude5 (new body)
    with BuildSketch(Plane.ZY.offset(5)):
        with Locations(Location((0, 0, 0), (0, 0, 84.260829523))):
            Circle(SKETCH9_R)
    extrude(amount=BOSS_EXTRUDE5_DEPTH)


with BuildPart() as part_1:
    with SkipClean():  # the faces are left unmerged after this step: merging them gives an invalid solid
        add(part.part)

        add(body_2.part)  # Boss-Extrude6 merges body 2
        # Sketch10 → Boss-Extrude6 (add)
        with BuildSketch(Plane(origin=(-5, 0, 0), x_dir=(0, 0, -1), z_dir=(1, 0, 0))):
            with Locations(Location((0, 0, 0), (0, 0, 180))):
                Circle(SKETCH10_R)
        extrude(amount=BOSS_EXTRUDE6_DEPTH)

    # Sketch11 → Boss-Extrude7 (add)
    with SkipClean():  # the faces are left unmerged after this step: merging them gives an invalid solid
        with BuildSketch(Plane.ZY.offset(15)):
            Circle(SKETCH11_R)
        extrude(amount=BOSS_EXTRUDE7_DEPTH)

    # Loft2: read off the stored shape, not the designer's step
    # Loft2: loft between two sections, ruled curve by curve
    with SkipClean():  # the faces are left unmerged after this step: merging them gives an invalid solid
        loft2_from = [
            Edge.make_bspline([(-15, 9.967693129, -7.542883646), (-15, -5.118074163, -27.478269903), (-15, -25.05346042, -12.392502611), (-15, -9.967693129, 7.542883646), (-15, 5.118074163, 27.478269903), (-15, 25.05346042, 12.392502611), (-15, 9.967693129, -7.542883646)], [0, 0, 0, 0, 0.5, 0.5, 0.5, 1, 1, 1, 1], 3, [1, 0.333333333, 0.333333333, 1, 0.333333333, 0.333333333, 1]),
        ]
        loft2_to = [
            Edge.make_bspline([(-20, 7.220329767, -2.028999276), (-20, 3.162331215, -16.469658809), (-20, -11.278328318, -12.411660258), (-20, -7.220329767, 2.028999276), (-20, -3.162331215, 16.469658809), (-20, 11.278328318, 12.411660258), (-20, 7.220329767, -2.028999276)], [0, 0, 0, 0, 0.5, 0.5, 0.5, 1, 1, 1, 1], 3, [1, 0.333333333, 0.333333333, 1, 0.333333333, 0.333333333, 1]),
        ]
        loft2 = Solid(Shell([*[Face.make_surface_from_curves(loft2_from[k], loft2_to[k]) for k in range(1)], Face(Wire(loft2_from)), Face(Wire(loft2_to))]))
        add(loft2)


solid = part_1.part
